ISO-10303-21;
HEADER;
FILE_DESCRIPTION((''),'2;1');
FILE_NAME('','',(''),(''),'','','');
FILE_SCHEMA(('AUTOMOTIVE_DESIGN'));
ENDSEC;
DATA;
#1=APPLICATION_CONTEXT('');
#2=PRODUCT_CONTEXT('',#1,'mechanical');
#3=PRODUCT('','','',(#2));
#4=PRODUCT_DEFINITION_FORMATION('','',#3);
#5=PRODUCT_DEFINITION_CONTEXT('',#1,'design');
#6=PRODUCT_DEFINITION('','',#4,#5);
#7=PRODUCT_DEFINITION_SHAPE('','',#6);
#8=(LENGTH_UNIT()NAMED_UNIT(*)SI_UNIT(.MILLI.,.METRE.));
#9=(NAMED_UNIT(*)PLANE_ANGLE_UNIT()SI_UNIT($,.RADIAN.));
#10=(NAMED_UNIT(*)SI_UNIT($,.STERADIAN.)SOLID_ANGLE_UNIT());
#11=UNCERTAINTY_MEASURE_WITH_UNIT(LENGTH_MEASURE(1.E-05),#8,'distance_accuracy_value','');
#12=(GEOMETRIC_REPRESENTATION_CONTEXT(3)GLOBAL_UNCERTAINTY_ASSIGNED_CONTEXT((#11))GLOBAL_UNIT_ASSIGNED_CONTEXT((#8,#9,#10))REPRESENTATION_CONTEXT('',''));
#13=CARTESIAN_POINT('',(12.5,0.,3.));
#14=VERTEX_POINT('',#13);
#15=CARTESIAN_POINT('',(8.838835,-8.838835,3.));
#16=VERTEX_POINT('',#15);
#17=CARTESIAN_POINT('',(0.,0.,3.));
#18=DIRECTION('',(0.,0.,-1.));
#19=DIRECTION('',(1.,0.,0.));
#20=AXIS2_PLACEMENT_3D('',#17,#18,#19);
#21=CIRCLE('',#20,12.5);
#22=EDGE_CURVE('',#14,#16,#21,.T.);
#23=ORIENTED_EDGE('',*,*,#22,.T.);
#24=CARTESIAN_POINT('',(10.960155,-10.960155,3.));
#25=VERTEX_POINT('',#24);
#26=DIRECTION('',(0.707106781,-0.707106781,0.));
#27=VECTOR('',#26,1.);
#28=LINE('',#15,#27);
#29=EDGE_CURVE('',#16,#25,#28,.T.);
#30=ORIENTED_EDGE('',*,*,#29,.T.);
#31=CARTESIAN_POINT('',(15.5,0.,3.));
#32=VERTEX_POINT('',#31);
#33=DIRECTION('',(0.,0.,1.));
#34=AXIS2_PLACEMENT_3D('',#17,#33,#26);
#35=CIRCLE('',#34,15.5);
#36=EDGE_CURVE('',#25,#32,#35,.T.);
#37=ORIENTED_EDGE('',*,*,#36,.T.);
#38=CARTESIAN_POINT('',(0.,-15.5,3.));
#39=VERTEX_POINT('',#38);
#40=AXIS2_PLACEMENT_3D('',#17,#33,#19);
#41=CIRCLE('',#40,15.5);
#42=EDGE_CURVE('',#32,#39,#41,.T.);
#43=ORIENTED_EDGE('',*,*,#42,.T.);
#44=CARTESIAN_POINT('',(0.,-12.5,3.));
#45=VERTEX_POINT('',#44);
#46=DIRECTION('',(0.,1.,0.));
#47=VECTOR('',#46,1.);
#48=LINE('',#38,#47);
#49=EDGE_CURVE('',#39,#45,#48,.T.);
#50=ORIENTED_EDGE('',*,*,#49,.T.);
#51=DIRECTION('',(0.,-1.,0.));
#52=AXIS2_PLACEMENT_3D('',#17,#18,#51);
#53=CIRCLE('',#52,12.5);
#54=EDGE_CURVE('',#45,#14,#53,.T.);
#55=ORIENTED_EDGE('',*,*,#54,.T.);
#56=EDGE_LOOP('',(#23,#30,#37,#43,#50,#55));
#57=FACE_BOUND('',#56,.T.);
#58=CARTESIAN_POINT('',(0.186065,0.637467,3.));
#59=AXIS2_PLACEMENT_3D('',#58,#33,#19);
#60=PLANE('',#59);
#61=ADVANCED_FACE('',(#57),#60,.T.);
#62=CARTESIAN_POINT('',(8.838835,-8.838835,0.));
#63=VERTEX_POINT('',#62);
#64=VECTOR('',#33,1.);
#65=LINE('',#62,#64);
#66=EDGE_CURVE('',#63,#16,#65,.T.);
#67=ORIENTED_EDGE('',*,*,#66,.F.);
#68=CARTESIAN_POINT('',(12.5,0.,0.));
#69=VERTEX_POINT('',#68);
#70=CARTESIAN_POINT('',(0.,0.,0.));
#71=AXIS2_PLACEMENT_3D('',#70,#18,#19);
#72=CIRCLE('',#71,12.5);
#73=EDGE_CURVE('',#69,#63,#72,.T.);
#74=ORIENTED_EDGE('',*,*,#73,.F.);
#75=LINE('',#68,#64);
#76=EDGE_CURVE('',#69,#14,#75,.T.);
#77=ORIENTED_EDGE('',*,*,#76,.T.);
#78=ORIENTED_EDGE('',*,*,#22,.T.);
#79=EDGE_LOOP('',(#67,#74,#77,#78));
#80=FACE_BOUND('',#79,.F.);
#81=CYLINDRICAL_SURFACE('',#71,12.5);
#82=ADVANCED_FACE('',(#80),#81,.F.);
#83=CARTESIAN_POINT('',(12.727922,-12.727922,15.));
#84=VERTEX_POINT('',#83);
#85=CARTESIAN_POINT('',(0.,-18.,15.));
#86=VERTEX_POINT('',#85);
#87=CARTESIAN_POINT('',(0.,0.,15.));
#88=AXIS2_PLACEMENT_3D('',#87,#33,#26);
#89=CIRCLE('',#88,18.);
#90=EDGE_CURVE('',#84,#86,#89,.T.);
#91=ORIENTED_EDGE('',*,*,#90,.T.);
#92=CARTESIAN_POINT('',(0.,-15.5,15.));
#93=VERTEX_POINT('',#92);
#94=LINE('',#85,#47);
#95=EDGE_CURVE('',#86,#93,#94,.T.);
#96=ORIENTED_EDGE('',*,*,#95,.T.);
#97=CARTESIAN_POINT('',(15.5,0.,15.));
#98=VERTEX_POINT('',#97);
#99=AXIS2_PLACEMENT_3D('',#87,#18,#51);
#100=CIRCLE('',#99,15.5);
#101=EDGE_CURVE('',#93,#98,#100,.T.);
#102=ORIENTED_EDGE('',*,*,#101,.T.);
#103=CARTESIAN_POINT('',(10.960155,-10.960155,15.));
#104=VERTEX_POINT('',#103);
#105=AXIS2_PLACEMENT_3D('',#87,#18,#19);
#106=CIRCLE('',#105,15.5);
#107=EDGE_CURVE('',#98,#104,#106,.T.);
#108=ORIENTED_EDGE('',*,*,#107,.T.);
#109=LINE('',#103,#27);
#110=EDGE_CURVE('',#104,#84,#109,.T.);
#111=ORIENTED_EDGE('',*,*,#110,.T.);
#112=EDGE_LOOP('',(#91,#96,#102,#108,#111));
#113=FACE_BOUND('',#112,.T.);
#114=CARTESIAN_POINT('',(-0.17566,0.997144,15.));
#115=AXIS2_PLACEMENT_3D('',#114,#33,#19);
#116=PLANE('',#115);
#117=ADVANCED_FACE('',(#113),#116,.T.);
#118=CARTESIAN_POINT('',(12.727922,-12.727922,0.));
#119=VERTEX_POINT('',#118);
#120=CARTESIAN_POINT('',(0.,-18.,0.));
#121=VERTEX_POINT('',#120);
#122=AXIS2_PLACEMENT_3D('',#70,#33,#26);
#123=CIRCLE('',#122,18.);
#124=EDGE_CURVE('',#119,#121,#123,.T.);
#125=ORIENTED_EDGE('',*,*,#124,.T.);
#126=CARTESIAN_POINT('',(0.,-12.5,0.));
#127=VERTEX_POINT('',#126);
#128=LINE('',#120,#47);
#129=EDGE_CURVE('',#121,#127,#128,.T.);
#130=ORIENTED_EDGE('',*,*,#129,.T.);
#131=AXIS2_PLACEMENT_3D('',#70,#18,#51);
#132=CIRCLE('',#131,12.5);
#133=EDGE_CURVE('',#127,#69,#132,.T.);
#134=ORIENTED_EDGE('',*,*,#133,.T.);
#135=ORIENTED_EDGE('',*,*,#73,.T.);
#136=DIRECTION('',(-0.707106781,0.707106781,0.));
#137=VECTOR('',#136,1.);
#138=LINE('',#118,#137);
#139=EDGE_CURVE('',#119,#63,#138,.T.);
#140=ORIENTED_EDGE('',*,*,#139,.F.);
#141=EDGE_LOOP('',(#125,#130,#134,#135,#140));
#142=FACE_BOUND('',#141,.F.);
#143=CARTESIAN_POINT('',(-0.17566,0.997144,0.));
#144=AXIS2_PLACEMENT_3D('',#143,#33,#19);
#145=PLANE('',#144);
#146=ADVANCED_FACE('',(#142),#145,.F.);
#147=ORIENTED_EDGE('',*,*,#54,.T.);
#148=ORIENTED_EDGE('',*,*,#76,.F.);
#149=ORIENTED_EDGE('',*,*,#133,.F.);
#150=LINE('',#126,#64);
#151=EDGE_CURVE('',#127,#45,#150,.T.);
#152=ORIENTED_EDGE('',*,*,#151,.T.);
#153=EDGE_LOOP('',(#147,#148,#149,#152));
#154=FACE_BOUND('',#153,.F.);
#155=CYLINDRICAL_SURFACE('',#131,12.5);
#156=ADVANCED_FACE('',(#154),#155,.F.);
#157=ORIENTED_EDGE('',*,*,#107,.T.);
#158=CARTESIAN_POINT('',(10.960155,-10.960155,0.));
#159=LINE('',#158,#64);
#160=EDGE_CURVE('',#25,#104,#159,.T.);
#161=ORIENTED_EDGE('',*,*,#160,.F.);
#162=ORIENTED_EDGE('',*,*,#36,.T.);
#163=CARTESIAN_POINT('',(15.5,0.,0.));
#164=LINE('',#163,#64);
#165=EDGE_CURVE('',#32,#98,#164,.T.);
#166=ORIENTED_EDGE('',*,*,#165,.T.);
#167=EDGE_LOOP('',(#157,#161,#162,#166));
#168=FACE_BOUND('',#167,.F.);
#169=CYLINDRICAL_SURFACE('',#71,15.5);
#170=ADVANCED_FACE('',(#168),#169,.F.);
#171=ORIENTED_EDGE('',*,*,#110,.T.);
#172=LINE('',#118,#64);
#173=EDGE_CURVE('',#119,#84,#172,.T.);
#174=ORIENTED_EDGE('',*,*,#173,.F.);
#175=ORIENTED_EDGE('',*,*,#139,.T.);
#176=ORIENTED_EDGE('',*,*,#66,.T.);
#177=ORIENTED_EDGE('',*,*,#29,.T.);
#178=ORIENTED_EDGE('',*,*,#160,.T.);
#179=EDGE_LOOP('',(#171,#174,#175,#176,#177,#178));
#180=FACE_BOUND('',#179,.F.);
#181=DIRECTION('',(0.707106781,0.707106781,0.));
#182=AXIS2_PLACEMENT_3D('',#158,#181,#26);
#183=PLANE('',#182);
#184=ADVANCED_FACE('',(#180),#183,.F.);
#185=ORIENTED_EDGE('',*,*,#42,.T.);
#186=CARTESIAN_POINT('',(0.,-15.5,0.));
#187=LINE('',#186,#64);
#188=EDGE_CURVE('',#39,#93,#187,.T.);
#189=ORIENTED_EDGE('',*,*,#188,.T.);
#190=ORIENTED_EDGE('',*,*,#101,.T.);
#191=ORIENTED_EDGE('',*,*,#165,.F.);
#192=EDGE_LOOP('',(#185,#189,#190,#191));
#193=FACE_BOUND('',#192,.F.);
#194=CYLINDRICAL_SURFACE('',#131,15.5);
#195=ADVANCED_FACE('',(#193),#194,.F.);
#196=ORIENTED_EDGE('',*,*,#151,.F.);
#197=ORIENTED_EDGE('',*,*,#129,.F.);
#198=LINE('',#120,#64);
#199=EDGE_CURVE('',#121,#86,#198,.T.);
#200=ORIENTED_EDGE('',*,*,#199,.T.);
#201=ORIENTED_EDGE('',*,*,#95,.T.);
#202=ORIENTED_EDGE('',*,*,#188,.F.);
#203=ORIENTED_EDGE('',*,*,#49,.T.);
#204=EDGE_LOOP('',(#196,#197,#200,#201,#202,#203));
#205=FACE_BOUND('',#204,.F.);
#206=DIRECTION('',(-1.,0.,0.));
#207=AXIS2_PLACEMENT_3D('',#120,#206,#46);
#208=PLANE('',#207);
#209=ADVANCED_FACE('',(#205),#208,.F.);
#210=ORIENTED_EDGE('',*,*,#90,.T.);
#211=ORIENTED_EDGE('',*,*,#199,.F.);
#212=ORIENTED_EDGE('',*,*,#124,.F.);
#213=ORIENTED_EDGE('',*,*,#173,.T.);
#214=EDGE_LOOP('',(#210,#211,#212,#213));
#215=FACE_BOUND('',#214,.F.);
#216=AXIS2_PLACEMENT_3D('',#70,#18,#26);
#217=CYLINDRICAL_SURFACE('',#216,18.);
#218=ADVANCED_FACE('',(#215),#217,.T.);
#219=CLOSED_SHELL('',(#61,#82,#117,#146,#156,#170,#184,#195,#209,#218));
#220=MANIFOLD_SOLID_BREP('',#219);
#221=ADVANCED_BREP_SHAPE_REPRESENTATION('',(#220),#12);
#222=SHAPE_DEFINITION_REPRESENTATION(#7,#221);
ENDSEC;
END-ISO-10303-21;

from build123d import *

# Parameters (mm, degrees)
F1_DEPTH = 3
F2_DEPTH = 15


with BuildPart() as f1:
    # F0 (on Top) → F1 (new body)
    with BuildSketch(Plane.XY):
        with BuildLine():
            ThreePointArc((0, -12.5), (-8.8388347648, 8.8388347648), (12.5, 0))
            ThreePointArc((12.5, 0), (11.5484941564, -4.7835429046), (8.8388347648, -8.8388347648))
            Line((8.8388347648, -8.8388347648), (10.9601551084, -10.9601551084))
            ThreePointArc((10.9601551084, -10.9601551084), (14.3201327539, -5.9315932017), (15.5, 0))
            ThreePointArc((15.5, 0), (-10.9601551084, 10.9601551084), (0, -15.5))
            Line((0, -15.5), (0, -12.5))
        make_face()
    extrude(amount=F1_DEPTH)

    # F0 (on Top) → F2 (join)
    with BuildSketch(Plane.XY):
        with BuildLine():
            Line((0, -18), (0, -15.5))
            ThreePointArc((0, -15.5), (-10.9601551084, 10.9601551084), (15.5, 0))
            ThreePointArc((15.5, 0), (14.3201327539, -5.9315932017), (10.9601551084, -10.9601551084))
            Line((10.9601551084, -10.9601551084), (12.7279220614, -12.7279220614))
            ThreePointArc((12.7279220614, -12.7279220614), (16.6298315852, -6.8883017826), (18, 0))
            ThreePointArc((18, 0), (-12.7279220614, 12.7279220614), (0, -18))
        make_face()
    extrude(amount=F2_DEPTH)


solid = f1.part
